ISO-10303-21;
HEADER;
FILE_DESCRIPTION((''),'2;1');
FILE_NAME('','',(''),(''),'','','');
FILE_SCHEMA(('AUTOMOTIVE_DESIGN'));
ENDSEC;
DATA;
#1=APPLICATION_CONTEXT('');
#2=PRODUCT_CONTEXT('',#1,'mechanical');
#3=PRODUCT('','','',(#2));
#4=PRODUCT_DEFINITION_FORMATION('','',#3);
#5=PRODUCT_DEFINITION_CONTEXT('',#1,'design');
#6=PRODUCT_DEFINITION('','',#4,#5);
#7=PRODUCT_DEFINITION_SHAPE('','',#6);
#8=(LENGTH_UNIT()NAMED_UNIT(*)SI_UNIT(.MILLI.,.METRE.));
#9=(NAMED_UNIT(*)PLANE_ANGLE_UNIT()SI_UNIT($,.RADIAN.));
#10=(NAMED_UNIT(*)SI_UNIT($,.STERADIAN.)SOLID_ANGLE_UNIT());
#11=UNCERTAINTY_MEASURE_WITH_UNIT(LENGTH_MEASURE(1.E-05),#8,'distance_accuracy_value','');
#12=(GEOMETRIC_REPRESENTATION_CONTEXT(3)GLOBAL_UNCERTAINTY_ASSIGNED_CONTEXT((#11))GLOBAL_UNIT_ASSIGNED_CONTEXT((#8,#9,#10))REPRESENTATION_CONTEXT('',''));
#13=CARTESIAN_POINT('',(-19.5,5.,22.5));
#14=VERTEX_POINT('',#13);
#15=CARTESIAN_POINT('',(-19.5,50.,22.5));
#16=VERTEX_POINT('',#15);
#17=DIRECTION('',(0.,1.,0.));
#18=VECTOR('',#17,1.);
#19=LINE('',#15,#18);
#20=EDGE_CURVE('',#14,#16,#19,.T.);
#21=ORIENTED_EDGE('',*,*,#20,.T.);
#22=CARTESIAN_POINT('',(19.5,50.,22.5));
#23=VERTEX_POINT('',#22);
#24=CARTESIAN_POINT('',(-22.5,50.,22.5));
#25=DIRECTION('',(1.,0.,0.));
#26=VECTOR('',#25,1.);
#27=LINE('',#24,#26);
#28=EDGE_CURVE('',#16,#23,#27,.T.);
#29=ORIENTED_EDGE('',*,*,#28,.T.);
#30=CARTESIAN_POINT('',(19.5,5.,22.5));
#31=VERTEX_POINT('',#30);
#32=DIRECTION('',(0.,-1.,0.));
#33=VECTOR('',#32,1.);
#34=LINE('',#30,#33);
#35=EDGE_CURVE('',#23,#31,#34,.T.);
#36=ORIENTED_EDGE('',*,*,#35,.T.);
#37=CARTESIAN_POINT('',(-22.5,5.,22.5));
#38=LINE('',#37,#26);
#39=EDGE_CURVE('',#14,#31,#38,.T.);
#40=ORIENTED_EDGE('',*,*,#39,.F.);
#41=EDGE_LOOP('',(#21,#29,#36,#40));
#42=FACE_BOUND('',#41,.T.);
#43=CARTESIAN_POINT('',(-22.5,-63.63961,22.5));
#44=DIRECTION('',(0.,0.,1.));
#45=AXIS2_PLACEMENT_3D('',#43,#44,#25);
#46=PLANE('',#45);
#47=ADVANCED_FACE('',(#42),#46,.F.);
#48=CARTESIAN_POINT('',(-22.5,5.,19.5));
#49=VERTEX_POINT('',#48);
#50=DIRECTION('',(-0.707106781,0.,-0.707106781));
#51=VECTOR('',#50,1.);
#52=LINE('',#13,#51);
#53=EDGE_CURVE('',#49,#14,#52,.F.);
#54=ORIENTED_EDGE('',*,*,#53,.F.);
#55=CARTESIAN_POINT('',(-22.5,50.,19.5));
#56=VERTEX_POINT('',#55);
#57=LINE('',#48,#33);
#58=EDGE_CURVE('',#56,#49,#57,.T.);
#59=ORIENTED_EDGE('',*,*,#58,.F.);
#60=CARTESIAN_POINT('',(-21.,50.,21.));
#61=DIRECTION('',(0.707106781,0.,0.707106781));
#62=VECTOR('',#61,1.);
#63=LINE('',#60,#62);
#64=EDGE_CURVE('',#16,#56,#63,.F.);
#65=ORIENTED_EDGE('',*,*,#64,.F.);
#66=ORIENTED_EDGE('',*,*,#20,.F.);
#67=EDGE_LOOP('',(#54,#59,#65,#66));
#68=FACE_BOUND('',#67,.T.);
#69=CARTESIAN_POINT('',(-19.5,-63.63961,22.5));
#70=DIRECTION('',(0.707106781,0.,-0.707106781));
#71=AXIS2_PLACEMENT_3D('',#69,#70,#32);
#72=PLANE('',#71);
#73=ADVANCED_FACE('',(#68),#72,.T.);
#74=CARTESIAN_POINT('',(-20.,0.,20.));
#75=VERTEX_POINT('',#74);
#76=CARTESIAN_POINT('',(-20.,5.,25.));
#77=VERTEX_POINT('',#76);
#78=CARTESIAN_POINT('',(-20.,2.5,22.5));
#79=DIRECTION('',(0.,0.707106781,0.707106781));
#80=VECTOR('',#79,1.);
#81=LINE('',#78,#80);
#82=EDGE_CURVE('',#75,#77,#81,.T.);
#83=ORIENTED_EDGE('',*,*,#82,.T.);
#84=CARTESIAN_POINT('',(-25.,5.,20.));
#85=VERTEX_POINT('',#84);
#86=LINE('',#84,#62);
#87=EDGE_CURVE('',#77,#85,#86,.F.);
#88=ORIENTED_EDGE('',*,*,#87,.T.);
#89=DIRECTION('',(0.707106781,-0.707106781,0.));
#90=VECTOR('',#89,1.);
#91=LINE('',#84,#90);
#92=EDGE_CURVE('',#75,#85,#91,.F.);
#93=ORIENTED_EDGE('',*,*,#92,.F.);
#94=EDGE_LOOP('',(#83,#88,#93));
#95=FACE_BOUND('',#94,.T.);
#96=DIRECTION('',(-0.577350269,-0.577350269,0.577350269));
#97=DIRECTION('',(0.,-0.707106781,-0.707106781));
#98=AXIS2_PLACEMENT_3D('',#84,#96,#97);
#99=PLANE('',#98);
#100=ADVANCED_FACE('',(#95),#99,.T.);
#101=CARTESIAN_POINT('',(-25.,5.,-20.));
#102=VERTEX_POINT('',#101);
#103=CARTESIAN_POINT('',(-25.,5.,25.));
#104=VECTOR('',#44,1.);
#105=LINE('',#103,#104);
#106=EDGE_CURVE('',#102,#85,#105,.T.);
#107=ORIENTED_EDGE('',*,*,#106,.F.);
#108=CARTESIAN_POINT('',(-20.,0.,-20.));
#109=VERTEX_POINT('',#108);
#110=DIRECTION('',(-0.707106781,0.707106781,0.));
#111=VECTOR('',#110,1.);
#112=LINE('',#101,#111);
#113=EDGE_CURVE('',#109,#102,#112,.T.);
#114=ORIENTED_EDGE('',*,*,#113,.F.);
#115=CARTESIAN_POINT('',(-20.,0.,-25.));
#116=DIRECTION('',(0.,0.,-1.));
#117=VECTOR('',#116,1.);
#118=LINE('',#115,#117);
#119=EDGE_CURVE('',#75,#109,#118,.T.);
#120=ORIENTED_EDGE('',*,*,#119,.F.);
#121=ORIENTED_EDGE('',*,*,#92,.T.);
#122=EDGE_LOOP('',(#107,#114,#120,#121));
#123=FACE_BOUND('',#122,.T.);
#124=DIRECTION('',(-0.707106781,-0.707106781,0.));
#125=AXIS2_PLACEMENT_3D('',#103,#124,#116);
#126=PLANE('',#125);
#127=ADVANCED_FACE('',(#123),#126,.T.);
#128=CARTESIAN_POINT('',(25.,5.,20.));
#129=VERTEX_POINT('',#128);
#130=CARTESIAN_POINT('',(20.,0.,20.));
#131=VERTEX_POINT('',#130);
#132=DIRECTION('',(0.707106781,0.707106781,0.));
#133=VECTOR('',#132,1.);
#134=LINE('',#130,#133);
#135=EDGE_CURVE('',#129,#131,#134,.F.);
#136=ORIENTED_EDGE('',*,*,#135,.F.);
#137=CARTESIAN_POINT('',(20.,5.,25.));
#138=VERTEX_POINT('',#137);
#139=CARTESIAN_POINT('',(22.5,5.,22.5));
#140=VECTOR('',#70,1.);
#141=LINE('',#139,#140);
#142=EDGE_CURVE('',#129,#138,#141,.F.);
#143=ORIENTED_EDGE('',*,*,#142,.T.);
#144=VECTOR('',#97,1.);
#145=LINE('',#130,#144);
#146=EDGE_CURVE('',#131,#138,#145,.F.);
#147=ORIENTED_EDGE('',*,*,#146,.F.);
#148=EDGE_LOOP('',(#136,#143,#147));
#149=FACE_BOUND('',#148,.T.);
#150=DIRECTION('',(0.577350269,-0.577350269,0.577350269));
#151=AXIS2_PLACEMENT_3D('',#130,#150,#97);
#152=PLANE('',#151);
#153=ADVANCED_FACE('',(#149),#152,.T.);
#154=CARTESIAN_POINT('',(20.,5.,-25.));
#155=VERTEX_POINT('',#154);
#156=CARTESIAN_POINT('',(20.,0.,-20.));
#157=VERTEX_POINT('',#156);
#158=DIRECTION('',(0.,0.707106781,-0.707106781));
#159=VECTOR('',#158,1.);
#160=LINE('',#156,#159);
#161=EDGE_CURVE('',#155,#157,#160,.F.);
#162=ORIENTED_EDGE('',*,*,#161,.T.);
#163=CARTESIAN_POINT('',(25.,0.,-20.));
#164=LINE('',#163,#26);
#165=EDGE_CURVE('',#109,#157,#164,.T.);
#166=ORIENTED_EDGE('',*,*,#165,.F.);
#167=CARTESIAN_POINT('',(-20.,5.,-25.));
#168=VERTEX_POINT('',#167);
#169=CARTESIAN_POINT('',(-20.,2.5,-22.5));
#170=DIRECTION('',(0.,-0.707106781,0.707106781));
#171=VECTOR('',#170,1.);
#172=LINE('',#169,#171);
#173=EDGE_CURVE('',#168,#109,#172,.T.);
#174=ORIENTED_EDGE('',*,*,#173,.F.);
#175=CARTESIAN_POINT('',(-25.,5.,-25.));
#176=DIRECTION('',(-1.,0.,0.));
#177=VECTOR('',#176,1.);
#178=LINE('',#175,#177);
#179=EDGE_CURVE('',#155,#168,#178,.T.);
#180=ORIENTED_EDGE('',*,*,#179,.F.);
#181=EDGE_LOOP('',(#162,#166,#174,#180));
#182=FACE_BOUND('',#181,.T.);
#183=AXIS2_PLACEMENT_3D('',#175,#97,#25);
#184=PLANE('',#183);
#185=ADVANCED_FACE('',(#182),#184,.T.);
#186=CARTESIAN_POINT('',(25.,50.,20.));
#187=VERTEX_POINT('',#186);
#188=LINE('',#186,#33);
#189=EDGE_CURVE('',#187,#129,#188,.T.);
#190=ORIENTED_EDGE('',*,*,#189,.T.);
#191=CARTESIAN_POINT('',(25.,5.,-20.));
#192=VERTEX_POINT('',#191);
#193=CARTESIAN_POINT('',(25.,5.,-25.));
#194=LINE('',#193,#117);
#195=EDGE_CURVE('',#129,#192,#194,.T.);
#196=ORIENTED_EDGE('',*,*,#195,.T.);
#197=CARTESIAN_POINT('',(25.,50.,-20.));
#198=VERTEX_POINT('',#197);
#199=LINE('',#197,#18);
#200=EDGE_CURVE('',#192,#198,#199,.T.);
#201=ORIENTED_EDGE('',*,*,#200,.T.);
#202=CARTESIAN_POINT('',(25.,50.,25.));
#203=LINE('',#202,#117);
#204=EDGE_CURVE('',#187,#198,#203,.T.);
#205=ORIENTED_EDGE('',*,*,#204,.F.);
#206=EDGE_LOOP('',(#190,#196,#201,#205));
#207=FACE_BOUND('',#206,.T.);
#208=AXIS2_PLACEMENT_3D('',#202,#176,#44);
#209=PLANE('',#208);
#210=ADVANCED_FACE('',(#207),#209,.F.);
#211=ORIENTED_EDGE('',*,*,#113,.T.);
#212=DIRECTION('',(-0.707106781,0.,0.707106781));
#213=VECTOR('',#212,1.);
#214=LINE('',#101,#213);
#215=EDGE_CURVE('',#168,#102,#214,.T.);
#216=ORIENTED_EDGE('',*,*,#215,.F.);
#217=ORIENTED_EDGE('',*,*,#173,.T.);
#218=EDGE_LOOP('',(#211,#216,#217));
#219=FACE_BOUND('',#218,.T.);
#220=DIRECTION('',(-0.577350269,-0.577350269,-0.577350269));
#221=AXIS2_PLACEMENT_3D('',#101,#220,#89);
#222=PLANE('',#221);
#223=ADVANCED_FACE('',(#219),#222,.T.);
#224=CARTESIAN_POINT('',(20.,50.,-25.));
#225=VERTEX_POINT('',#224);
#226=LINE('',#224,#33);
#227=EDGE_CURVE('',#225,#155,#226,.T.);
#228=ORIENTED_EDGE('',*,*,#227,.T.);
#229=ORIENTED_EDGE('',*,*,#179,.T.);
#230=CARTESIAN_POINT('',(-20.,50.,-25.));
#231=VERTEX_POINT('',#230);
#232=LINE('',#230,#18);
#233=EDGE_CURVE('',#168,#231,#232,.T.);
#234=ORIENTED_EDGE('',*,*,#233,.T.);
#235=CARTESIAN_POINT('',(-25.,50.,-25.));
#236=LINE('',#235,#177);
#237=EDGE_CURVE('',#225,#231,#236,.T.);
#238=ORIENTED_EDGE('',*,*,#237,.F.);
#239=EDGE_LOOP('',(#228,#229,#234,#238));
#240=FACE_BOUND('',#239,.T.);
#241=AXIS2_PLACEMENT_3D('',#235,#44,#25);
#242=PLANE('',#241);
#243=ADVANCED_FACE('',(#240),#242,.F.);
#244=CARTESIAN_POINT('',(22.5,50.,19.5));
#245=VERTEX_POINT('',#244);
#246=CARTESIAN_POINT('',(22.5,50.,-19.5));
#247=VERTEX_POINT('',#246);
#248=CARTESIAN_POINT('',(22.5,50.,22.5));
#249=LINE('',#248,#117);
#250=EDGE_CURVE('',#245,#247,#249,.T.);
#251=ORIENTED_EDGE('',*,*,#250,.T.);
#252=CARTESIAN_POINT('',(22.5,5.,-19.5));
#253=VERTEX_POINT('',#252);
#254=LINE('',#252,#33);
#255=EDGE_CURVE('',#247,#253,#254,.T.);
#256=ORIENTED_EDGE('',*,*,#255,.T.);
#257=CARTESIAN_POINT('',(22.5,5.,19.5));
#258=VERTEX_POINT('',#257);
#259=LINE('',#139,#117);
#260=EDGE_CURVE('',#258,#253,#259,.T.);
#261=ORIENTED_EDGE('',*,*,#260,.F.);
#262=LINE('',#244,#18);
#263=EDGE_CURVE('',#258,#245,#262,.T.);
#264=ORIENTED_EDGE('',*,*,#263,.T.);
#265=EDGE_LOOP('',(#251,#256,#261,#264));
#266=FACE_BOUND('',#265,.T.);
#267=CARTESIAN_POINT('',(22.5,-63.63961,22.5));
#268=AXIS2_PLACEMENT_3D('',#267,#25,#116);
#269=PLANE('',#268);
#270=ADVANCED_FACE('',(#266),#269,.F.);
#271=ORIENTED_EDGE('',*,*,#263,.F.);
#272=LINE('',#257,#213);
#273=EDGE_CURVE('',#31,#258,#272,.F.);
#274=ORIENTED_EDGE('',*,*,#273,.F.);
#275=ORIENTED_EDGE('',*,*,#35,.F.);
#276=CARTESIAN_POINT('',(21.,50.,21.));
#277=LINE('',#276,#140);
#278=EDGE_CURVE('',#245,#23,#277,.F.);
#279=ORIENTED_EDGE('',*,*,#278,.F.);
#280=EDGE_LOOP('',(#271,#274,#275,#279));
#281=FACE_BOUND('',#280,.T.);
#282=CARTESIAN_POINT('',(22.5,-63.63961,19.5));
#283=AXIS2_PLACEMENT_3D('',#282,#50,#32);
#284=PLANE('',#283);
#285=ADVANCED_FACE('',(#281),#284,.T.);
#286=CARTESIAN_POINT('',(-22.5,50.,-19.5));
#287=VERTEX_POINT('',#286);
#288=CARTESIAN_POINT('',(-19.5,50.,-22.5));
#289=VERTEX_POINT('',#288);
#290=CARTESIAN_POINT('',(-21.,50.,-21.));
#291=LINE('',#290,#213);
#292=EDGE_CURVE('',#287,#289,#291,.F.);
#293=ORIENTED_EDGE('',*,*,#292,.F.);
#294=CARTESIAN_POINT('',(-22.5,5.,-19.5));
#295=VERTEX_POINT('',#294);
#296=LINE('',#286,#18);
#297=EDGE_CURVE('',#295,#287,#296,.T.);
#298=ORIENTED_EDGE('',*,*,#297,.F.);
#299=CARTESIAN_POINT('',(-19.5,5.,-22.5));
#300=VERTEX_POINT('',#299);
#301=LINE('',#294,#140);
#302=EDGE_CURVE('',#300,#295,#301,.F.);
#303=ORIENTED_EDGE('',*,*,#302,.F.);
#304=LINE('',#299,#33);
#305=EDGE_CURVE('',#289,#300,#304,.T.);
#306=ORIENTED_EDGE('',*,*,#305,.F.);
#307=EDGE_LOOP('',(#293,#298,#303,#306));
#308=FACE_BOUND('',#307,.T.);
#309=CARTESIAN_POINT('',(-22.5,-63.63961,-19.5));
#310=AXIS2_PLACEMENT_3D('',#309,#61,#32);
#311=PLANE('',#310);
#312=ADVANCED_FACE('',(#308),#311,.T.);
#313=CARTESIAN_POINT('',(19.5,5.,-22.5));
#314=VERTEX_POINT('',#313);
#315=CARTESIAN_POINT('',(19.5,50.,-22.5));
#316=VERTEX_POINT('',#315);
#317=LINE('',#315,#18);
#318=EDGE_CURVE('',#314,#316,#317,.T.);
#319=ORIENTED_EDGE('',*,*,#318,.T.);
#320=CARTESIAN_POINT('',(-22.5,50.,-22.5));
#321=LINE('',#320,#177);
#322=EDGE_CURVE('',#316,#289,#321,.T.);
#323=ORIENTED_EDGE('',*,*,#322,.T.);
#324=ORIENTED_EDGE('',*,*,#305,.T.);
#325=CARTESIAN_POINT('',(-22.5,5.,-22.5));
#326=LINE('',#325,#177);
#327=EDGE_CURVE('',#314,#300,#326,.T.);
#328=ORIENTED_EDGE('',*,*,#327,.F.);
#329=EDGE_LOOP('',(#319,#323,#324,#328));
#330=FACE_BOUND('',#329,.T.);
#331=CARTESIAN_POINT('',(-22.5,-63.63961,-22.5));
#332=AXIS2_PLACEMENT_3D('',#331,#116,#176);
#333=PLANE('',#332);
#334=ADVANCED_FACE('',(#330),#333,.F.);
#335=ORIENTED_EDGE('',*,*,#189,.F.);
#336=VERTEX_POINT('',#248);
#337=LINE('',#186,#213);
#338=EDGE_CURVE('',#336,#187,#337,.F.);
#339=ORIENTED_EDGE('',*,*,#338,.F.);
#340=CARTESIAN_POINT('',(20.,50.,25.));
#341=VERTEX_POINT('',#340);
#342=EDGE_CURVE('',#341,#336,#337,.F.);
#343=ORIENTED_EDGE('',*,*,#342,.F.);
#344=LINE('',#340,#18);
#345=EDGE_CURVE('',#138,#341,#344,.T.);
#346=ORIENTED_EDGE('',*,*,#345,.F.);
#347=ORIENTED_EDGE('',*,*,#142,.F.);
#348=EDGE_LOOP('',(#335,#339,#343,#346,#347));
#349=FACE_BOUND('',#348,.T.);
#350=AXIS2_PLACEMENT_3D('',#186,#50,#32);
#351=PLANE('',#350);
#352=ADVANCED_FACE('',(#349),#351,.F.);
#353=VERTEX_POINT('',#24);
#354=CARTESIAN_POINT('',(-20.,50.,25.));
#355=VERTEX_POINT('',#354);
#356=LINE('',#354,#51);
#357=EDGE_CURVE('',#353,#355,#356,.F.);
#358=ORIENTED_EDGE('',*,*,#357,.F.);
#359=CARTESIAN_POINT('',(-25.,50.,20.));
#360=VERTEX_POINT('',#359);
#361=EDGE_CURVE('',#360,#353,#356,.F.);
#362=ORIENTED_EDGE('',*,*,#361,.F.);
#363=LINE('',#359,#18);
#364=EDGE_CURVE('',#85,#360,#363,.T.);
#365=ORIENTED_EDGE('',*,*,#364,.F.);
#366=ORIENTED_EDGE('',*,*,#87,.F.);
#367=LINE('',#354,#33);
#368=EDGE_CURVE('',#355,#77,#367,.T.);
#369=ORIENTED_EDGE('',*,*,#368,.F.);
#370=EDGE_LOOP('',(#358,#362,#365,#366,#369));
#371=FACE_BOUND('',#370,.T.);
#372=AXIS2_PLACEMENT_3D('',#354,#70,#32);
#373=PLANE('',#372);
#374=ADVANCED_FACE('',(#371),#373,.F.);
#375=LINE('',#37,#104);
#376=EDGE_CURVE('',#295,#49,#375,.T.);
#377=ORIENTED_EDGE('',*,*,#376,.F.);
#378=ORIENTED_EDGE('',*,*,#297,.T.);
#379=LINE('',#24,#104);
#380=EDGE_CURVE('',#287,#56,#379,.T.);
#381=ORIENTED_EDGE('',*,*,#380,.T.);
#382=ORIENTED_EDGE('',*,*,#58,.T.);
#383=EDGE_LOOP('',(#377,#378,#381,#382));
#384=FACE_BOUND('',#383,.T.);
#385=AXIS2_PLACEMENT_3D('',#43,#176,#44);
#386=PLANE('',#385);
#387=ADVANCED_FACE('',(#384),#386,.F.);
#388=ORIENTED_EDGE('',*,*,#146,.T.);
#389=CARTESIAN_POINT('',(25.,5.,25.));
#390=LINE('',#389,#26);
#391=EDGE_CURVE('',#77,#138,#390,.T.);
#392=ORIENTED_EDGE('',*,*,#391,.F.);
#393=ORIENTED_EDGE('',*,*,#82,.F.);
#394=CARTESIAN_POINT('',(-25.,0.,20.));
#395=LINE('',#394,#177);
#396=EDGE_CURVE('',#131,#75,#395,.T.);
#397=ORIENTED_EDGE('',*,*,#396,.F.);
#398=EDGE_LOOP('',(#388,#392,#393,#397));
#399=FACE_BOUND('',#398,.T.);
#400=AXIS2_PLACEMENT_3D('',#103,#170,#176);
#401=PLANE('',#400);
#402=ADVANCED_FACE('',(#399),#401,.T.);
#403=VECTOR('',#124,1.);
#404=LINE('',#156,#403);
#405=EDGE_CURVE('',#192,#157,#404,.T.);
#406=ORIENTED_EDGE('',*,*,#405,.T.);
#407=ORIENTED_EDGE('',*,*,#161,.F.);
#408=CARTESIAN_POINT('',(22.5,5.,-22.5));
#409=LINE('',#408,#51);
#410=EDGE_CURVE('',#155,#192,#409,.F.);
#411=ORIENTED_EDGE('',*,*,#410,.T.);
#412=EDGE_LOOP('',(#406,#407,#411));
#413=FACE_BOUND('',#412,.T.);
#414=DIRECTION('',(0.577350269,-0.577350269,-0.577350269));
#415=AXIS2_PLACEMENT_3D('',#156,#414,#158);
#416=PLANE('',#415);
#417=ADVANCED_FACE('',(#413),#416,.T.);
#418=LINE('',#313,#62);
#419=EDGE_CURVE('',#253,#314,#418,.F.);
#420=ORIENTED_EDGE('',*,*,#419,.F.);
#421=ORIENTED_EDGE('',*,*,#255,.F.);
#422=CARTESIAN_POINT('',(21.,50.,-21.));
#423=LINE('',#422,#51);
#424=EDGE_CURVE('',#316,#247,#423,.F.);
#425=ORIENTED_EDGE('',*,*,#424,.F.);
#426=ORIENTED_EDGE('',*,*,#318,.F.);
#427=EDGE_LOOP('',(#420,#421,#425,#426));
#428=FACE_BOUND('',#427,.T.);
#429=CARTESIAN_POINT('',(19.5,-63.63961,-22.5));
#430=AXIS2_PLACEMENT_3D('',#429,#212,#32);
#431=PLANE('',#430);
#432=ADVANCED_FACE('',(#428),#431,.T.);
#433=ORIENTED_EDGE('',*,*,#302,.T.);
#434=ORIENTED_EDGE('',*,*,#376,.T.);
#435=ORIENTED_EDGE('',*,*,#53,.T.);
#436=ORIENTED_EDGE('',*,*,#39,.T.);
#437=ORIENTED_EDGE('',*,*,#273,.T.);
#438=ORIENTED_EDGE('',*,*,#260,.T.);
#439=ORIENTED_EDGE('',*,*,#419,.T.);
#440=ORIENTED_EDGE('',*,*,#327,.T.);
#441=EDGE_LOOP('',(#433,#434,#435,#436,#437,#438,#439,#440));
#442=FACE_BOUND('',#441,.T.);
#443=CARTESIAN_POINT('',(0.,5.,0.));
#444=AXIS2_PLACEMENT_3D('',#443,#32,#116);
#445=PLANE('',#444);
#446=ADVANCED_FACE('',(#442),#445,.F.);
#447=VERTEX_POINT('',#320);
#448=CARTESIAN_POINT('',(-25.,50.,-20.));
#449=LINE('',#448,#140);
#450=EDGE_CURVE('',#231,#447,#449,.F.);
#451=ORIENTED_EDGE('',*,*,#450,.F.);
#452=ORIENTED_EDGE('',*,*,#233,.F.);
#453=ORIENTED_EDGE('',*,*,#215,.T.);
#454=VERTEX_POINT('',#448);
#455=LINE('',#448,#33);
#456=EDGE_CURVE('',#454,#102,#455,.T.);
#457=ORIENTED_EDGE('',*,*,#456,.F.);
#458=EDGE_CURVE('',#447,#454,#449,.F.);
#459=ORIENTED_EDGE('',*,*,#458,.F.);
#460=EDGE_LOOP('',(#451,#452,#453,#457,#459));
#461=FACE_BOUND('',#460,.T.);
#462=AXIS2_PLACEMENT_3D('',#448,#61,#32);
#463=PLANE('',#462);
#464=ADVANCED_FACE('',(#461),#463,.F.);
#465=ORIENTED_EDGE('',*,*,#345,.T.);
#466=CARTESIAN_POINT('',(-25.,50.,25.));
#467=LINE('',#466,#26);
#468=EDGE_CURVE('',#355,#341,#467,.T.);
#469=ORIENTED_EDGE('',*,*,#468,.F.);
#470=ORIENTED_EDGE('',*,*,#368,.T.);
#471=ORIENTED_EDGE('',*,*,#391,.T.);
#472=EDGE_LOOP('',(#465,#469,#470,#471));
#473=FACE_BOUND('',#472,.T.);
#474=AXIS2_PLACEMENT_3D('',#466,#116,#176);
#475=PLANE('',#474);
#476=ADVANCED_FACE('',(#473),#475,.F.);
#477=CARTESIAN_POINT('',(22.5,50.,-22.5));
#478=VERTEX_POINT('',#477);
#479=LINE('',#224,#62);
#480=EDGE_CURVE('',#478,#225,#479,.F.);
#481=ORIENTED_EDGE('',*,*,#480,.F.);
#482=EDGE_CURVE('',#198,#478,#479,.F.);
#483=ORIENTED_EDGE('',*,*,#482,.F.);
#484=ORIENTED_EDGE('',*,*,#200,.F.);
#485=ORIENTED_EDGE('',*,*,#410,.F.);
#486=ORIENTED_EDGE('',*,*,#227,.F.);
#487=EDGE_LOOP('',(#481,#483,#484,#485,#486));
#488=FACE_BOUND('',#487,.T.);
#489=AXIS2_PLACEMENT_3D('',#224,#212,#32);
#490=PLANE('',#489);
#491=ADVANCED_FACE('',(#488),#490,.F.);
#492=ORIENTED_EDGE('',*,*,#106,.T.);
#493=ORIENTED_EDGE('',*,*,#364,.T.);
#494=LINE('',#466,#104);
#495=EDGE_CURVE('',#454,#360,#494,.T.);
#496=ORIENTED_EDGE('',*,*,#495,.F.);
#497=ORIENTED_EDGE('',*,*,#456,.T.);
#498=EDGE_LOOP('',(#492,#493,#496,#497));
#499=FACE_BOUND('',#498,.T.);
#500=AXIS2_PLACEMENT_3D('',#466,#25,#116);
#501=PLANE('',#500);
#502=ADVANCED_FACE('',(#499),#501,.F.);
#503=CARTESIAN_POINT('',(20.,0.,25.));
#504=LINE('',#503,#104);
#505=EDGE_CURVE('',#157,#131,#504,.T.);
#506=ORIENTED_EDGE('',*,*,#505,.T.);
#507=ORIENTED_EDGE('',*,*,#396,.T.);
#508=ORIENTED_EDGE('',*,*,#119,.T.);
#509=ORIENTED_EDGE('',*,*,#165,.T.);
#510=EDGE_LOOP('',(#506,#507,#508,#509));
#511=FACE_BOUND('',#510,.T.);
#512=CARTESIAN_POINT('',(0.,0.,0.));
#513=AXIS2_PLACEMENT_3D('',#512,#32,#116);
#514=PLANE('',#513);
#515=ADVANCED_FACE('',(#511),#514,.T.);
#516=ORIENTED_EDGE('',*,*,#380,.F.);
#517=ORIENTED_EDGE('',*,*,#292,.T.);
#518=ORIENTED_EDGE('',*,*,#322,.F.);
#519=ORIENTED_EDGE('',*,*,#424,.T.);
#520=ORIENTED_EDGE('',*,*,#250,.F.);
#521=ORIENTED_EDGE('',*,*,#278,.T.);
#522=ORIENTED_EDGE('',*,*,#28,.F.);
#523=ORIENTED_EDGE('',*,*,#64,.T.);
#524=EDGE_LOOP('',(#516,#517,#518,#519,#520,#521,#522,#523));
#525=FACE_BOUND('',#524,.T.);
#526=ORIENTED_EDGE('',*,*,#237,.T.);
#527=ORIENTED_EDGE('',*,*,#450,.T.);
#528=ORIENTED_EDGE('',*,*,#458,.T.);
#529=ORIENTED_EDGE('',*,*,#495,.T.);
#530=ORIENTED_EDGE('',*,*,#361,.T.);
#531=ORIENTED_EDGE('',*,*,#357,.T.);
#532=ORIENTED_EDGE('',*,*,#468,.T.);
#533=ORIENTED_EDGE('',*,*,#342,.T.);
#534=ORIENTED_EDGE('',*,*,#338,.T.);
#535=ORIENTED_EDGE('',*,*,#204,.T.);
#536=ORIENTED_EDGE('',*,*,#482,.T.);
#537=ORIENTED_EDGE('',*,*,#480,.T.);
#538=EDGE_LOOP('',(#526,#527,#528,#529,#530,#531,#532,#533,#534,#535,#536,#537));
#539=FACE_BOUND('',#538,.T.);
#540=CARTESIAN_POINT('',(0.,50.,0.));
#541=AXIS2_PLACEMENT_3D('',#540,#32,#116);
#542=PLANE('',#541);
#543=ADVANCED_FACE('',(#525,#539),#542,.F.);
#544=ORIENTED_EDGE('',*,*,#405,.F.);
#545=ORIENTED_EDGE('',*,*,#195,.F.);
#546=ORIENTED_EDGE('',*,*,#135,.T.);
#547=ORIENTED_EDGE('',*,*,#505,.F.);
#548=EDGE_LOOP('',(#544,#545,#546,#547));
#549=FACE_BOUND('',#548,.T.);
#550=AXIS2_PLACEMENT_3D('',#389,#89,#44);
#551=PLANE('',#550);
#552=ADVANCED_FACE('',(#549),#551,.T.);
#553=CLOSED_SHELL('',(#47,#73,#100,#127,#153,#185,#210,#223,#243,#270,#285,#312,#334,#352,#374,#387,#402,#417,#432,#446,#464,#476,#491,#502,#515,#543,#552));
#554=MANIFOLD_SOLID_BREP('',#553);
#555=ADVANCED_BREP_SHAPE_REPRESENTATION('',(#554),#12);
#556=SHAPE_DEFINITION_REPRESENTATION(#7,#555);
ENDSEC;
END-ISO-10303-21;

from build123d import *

# Parameters (mm, degrees)
SKETCH1_W           = 50
SKETCH1_H           = 50
BOSS_EXTRUDE1_DEPTH = 50
SKETCH2_W           = 45
SKETCH2_H           = 45
CUT_EXTRUDE1_DEPTH  = 45
FILLET2_SIZE        = 5
FILLET3_SIZE        = 3


with BuildPart() as part:
    # Sketch1 → Boss-Extrude1 (new body)
    with BuildSketch(Plane(origin=(0, 0, 0), x_dir=(1, 0, 0), z_dir=(0, 1, 0))):
        Rectangle(SKETCH1_W, SKETCH1_H)
    extrude(amount=BOSS_EXTRUDE1_DEPTH)

    # Sketch2 → Cut-Extrude1 (cut)
    with BuildSketch(Plane(origin=(0, 50, 0), x_dir=(1, 0, 0), z_dir=(0, 1, 0))):
        Rectangle(SKETCH2_W, SKETCH2_H)
    extrude(amount=-CUT_EXTRUDE1_DEPTH, mode=Mode.SUBTRACT)

    # Fillet2
    fillet2_edges = [part.edges().sort_by_distance(p)[0] for p in [
        (0, 0, 25),
        (-25, 0, 0),
        (0, 0, -25),
        (25, 0, 0),
        (25, 25, 25),
        (-25, 25, 25),
        (-25, 25, -25),
        (25, 25, -25),
    ]]
    chamfer(fillet2_edges, length=FILLET2_SIZE - 0.0001)  # a hair under: the kernel refuses the full size

    # Fillet3
    fillet3_edges = [part.edges().sort_by_distance(p)[0] for p in [
        (-22.5, 27.5, -22.5),
        (-22.5, 27.5, 22.5),
        (22.5, 27.5, 22.5),
        (22.5, 27.5, -22.5),
    ]]
    chamfer(fillet3_edges, length=FILLET3_SIZE)


solid = part.part
